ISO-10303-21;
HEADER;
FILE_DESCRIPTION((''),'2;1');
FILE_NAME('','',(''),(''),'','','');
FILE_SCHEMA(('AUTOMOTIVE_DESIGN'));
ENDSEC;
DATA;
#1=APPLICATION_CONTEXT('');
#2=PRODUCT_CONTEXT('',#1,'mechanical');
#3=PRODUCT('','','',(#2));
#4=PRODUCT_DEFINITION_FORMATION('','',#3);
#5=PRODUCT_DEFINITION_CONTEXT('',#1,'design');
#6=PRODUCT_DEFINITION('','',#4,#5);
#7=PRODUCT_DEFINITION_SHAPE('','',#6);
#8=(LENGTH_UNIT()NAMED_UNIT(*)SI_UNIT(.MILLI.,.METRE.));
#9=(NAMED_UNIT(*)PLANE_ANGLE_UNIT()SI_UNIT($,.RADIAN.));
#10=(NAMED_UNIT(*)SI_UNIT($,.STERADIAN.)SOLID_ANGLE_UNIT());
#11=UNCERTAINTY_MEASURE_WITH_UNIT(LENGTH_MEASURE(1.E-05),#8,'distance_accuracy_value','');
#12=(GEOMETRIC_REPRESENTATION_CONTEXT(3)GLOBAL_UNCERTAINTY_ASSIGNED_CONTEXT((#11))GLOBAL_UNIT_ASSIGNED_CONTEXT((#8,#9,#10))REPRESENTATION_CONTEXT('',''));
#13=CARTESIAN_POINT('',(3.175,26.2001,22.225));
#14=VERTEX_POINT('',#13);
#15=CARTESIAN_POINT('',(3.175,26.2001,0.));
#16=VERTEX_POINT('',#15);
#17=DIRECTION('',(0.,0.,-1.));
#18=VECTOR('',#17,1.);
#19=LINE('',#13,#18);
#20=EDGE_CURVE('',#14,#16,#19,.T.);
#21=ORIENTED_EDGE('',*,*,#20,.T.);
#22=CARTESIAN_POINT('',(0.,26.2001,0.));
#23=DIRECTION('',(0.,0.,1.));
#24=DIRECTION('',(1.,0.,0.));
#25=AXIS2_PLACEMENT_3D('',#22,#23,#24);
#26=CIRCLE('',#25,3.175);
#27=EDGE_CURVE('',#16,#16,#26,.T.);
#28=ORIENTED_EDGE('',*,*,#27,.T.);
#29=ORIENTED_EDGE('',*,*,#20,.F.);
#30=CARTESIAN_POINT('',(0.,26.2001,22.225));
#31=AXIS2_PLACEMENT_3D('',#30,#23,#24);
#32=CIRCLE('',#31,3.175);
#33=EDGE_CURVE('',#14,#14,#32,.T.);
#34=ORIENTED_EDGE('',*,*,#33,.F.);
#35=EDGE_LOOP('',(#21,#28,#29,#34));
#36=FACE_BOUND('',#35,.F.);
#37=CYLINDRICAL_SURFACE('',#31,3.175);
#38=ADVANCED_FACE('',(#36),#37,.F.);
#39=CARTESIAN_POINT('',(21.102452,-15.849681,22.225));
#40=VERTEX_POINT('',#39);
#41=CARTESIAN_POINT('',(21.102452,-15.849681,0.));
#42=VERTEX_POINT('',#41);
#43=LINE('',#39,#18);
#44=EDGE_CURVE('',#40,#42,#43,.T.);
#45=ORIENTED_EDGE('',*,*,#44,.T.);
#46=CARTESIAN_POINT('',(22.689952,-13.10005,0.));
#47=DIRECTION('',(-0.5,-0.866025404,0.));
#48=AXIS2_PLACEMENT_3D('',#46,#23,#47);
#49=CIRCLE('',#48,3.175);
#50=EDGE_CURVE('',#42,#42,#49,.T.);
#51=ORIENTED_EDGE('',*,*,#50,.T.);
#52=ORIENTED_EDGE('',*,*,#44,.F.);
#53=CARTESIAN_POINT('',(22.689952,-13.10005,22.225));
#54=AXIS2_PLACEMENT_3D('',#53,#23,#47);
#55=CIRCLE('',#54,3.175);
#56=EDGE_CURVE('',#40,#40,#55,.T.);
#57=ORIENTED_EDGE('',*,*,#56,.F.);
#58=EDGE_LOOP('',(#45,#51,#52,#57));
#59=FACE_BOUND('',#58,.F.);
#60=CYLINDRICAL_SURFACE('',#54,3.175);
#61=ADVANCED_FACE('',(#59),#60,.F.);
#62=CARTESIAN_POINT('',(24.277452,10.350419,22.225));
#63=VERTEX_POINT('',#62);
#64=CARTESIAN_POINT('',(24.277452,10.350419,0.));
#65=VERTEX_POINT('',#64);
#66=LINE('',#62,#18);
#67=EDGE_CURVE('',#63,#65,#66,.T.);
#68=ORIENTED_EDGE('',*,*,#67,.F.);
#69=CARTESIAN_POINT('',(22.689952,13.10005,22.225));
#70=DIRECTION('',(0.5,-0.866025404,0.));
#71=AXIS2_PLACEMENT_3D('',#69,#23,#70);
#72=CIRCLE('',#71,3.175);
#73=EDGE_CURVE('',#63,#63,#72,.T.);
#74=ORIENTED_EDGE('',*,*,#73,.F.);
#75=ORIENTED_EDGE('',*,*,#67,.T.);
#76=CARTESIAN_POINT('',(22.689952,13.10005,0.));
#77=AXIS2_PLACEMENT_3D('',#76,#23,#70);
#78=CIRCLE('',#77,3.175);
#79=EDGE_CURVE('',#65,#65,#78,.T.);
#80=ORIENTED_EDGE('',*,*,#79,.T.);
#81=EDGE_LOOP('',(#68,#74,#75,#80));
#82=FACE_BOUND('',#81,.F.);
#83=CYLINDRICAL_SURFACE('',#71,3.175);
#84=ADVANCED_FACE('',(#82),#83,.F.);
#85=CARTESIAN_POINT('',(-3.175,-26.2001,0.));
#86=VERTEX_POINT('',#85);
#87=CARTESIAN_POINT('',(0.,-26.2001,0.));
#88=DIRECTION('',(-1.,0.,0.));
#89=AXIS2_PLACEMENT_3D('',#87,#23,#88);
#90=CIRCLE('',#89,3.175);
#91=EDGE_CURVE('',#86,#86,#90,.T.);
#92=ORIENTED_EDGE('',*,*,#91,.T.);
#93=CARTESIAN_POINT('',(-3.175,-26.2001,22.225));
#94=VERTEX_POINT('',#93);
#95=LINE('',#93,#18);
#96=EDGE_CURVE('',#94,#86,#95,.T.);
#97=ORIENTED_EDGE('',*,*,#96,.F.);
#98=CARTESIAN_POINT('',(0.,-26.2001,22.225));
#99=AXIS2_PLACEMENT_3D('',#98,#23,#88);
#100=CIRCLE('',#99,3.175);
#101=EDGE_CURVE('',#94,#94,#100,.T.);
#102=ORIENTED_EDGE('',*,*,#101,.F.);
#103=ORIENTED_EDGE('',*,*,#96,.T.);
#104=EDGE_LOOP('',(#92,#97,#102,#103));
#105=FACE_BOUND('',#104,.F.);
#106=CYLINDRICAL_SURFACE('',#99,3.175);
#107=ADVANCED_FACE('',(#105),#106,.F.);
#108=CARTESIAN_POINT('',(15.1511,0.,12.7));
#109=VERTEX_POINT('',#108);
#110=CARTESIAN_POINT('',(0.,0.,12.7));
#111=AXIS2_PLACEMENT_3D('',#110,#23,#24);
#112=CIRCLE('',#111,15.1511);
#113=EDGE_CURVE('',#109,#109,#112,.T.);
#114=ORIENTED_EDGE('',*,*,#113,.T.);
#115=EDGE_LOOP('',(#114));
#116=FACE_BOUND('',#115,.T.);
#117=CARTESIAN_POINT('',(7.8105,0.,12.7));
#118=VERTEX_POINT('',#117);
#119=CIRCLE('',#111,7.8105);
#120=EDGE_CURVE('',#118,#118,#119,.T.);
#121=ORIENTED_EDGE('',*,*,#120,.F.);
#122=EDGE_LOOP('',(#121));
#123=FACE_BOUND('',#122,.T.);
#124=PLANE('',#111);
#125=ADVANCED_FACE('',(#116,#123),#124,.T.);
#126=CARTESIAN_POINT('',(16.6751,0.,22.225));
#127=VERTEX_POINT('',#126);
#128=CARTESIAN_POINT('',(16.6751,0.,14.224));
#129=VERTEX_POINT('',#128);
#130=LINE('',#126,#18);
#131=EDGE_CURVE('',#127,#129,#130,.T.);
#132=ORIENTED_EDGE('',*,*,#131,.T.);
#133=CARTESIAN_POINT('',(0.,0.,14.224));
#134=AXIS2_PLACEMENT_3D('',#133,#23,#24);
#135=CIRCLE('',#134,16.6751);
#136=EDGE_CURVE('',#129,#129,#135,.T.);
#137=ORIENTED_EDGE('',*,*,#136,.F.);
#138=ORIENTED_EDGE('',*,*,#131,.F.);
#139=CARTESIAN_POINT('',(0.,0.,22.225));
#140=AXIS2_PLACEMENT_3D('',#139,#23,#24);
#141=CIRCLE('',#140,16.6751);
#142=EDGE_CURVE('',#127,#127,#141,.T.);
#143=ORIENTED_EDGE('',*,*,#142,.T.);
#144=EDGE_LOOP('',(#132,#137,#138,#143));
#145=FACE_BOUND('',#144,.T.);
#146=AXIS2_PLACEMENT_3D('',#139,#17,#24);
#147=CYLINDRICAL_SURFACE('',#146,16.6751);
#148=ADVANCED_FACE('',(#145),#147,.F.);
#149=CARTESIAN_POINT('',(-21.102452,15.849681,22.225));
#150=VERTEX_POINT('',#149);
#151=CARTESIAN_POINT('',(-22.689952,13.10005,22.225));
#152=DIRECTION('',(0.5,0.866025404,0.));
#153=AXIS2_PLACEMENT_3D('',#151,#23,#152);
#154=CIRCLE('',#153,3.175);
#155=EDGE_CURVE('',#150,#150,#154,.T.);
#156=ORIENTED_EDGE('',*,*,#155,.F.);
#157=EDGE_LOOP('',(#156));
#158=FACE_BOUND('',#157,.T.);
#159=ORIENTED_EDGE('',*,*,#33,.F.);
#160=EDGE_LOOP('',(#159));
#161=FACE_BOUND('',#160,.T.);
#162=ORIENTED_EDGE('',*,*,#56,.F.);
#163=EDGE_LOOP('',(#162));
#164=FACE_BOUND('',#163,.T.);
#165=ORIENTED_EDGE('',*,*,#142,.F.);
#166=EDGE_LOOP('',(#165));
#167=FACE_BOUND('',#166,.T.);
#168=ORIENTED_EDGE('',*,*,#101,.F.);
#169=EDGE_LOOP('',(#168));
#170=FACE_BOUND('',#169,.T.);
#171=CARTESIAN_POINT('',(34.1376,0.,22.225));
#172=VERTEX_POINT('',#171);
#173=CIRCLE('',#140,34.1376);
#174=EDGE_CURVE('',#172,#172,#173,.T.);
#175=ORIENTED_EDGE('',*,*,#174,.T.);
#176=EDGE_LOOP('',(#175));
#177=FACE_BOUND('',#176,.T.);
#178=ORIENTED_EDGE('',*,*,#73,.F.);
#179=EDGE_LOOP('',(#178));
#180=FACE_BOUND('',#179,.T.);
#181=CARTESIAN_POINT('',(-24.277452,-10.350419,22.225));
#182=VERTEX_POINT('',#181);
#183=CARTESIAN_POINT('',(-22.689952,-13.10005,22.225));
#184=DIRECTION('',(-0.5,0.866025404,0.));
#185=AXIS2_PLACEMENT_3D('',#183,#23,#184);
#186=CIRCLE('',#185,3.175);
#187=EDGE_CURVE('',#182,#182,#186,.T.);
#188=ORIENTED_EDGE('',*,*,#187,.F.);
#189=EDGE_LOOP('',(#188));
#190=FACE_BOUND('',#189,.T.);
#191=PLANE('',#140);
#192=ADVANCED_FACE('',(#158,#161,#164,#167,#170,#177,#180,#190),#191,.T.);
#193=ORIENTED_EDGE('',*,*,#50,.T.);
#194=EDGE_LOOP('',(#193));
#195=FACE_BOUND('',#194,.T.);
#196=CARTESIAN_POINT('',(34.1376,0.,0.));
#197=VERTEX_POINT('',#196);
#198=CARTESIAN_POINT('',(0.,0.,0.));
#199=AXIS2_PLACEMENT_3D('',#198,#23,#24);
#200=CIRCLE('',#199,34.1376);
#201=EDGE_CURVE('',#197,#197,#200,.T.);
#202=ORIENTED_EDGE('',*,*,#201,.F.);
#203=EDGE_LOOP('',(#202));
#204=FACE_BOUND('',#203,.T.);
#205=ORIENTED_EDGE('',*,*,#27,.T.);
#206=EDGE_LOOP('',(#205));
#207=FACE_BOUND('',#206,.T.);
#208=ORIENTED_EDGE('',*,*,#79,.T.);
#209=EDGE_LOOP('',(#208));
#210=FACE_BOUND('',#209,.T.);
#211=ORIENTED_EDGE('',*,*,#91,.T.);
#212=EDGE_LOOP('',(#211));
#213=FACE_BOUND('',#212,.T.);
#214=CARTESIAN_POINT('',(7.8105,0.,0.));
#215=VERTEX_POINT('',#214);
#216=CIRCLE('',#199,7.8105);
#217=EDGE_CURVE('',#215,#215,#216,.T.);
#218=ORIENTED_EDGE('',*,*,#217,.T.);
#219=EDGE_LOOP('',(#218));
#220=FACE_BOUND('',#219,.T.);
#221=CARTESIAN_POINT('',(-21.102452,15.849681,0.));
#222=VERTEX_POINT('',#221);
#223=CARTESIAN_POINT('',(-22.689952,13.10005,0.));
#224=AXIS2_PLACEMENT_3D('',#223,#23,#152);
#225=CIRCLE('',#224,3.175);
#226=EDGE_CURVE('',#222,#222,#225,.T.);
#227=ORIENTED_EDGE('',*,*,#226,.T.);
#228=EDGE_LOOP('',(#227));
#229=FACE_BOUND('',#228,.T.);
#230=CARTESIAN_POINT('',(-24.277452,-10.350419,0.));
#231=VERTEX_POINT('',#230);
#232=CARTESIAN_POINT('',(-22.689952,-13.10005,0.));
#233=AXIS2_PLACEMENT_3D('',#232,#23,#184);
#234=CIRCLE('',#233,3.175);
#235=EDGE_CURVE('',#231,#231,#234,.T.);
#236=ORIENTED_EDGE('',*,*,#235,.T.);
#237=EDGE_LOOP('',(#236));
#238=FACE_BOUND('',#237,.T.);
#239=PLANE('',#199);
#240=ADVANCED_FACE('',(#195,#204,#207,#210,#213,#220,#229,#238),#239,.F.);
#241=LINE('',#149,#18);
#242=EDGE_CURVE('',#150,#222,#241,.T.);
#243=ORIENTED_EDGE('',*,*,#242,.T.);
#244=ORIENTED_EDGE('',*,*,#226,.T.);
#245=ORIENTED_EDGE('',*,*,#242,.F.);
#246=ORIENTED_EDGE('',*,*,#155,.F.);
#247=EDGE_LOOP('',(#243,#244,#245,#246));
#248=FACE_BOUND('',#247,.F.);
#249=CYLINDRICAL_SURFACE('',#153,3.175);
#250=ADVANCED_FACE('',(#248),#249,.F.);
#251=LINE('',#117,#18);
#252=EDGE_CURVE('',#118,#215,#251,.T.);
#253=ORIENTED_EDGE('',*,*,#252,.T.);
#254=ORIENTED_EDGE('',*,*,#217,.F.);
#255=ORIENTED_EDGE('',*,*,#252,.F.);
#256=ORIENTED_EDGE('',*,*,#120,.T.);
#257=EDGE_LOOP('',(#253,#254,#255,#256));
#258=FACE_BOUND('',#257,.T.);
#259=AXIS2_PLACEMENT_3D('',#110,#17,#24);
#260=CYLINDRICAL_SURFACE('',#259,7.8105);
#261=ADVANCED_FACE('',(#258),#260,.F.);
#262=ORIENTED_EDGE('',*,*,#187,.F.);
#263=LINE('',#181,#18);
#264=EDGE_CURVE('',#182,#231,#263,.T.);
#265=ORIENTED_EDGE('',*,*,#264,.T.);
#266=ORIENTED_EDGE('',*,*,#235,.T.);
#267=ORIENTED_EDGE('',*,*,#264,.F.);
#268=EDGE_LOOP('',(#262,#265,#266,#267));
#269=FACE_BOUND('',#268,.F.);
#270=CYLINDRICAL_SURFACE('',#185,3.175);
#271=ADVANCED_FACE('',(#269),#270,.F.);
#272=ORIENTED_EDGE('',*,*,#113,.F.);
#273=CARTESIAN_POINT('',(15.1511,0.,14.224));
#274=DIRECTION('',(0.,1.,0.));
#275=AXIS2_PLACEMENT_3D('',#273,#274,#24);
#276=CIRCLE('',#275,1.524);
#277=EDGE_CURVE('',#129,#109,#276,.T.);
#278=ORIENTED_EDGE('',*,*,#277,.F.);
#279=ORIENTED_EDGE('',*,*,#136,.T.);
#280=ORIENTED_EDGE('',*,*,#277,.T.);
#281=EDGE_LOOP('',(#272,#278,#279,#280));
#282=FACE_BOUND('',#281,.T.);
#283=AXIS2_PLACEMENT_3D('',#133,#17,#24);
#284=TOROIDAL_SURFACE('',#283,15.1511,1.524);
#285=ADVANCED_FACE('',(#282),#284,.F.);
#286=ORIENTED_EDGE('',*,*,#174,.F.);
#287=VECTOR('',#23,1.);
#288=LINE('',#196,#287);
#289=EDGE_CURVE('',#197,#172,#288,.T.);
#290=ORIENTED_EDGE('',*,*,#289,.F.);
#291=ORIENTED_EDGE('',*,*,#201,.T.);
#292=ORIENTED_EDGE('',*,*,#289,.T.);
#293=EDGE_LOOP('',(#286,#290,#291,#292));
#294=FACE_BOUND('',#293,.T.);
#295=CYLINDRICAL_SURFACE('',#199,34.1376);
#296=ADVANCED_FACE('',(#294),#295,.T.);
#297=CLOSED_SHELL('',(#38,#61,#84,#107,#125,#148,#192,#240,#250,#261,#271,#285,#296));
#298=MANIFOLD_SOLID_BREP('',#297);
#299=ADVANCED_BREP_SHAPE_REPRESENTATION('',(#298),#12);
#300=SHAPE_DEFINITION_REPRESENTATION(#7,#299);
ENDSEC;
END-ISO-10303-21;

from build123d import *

# Parameters (mm, degrees)
F2_R            = 3.175
F3_DEPTH        = 22.226
F3_COPIES_COUNT = 6


# Not quite as in the source:
# - a pattern or mirror of a feature is missing from the dataset's text; its kind, count and spacing are read off the source's solid


with BuildPart() as f1:
    # F0 (on Front) → F1 (revolve)
    with BuildSketch(Plane.XZ):
        with BuildLine():
            Line((7.8105, 0), (34.1376, 0))
            Line((34.1376, 0), (34.1376, 22.225))
            Line((34.1376, 22.225), (16.6751, 22.225))
            Line((16.6751, 22.225), (16.6751, 14.224))
            ThreePointArc((16.6751, 14.224), (16.2287307345, 13.1463692655), (15.1511, 12.7))
            Line((15.1511, 12.7), (7.8105, 12.7))
            Line((7.8105, 12.7), (7.8105, 0))
        make_face()
    revolve(axis=Axis((0, 0, 6.35), (0, 0, 1)))

    # F2 (on face) → F3 (cut, through all)
    with BuildSketch(Plane.XY.offset(22.225)):
        with Locations((0, 26.2001)):
            Circle(F2_R)
    f3 = extrude(amount=-F3_DEPTH, mode=Mode.SUBTRACT)

    # F3_copies: F3 ×6 about axis
    f3_copies_axis = Axis((0, 0, 0), (0, 0, 1))
    for i in range(1, F3_COPIES_COUNT):
        add(f3.rotate(f3_copies_axis, i * 360 / F3_COPIES_COUNT), mode=Mode.SUBTRACT)


solid = f1.part
